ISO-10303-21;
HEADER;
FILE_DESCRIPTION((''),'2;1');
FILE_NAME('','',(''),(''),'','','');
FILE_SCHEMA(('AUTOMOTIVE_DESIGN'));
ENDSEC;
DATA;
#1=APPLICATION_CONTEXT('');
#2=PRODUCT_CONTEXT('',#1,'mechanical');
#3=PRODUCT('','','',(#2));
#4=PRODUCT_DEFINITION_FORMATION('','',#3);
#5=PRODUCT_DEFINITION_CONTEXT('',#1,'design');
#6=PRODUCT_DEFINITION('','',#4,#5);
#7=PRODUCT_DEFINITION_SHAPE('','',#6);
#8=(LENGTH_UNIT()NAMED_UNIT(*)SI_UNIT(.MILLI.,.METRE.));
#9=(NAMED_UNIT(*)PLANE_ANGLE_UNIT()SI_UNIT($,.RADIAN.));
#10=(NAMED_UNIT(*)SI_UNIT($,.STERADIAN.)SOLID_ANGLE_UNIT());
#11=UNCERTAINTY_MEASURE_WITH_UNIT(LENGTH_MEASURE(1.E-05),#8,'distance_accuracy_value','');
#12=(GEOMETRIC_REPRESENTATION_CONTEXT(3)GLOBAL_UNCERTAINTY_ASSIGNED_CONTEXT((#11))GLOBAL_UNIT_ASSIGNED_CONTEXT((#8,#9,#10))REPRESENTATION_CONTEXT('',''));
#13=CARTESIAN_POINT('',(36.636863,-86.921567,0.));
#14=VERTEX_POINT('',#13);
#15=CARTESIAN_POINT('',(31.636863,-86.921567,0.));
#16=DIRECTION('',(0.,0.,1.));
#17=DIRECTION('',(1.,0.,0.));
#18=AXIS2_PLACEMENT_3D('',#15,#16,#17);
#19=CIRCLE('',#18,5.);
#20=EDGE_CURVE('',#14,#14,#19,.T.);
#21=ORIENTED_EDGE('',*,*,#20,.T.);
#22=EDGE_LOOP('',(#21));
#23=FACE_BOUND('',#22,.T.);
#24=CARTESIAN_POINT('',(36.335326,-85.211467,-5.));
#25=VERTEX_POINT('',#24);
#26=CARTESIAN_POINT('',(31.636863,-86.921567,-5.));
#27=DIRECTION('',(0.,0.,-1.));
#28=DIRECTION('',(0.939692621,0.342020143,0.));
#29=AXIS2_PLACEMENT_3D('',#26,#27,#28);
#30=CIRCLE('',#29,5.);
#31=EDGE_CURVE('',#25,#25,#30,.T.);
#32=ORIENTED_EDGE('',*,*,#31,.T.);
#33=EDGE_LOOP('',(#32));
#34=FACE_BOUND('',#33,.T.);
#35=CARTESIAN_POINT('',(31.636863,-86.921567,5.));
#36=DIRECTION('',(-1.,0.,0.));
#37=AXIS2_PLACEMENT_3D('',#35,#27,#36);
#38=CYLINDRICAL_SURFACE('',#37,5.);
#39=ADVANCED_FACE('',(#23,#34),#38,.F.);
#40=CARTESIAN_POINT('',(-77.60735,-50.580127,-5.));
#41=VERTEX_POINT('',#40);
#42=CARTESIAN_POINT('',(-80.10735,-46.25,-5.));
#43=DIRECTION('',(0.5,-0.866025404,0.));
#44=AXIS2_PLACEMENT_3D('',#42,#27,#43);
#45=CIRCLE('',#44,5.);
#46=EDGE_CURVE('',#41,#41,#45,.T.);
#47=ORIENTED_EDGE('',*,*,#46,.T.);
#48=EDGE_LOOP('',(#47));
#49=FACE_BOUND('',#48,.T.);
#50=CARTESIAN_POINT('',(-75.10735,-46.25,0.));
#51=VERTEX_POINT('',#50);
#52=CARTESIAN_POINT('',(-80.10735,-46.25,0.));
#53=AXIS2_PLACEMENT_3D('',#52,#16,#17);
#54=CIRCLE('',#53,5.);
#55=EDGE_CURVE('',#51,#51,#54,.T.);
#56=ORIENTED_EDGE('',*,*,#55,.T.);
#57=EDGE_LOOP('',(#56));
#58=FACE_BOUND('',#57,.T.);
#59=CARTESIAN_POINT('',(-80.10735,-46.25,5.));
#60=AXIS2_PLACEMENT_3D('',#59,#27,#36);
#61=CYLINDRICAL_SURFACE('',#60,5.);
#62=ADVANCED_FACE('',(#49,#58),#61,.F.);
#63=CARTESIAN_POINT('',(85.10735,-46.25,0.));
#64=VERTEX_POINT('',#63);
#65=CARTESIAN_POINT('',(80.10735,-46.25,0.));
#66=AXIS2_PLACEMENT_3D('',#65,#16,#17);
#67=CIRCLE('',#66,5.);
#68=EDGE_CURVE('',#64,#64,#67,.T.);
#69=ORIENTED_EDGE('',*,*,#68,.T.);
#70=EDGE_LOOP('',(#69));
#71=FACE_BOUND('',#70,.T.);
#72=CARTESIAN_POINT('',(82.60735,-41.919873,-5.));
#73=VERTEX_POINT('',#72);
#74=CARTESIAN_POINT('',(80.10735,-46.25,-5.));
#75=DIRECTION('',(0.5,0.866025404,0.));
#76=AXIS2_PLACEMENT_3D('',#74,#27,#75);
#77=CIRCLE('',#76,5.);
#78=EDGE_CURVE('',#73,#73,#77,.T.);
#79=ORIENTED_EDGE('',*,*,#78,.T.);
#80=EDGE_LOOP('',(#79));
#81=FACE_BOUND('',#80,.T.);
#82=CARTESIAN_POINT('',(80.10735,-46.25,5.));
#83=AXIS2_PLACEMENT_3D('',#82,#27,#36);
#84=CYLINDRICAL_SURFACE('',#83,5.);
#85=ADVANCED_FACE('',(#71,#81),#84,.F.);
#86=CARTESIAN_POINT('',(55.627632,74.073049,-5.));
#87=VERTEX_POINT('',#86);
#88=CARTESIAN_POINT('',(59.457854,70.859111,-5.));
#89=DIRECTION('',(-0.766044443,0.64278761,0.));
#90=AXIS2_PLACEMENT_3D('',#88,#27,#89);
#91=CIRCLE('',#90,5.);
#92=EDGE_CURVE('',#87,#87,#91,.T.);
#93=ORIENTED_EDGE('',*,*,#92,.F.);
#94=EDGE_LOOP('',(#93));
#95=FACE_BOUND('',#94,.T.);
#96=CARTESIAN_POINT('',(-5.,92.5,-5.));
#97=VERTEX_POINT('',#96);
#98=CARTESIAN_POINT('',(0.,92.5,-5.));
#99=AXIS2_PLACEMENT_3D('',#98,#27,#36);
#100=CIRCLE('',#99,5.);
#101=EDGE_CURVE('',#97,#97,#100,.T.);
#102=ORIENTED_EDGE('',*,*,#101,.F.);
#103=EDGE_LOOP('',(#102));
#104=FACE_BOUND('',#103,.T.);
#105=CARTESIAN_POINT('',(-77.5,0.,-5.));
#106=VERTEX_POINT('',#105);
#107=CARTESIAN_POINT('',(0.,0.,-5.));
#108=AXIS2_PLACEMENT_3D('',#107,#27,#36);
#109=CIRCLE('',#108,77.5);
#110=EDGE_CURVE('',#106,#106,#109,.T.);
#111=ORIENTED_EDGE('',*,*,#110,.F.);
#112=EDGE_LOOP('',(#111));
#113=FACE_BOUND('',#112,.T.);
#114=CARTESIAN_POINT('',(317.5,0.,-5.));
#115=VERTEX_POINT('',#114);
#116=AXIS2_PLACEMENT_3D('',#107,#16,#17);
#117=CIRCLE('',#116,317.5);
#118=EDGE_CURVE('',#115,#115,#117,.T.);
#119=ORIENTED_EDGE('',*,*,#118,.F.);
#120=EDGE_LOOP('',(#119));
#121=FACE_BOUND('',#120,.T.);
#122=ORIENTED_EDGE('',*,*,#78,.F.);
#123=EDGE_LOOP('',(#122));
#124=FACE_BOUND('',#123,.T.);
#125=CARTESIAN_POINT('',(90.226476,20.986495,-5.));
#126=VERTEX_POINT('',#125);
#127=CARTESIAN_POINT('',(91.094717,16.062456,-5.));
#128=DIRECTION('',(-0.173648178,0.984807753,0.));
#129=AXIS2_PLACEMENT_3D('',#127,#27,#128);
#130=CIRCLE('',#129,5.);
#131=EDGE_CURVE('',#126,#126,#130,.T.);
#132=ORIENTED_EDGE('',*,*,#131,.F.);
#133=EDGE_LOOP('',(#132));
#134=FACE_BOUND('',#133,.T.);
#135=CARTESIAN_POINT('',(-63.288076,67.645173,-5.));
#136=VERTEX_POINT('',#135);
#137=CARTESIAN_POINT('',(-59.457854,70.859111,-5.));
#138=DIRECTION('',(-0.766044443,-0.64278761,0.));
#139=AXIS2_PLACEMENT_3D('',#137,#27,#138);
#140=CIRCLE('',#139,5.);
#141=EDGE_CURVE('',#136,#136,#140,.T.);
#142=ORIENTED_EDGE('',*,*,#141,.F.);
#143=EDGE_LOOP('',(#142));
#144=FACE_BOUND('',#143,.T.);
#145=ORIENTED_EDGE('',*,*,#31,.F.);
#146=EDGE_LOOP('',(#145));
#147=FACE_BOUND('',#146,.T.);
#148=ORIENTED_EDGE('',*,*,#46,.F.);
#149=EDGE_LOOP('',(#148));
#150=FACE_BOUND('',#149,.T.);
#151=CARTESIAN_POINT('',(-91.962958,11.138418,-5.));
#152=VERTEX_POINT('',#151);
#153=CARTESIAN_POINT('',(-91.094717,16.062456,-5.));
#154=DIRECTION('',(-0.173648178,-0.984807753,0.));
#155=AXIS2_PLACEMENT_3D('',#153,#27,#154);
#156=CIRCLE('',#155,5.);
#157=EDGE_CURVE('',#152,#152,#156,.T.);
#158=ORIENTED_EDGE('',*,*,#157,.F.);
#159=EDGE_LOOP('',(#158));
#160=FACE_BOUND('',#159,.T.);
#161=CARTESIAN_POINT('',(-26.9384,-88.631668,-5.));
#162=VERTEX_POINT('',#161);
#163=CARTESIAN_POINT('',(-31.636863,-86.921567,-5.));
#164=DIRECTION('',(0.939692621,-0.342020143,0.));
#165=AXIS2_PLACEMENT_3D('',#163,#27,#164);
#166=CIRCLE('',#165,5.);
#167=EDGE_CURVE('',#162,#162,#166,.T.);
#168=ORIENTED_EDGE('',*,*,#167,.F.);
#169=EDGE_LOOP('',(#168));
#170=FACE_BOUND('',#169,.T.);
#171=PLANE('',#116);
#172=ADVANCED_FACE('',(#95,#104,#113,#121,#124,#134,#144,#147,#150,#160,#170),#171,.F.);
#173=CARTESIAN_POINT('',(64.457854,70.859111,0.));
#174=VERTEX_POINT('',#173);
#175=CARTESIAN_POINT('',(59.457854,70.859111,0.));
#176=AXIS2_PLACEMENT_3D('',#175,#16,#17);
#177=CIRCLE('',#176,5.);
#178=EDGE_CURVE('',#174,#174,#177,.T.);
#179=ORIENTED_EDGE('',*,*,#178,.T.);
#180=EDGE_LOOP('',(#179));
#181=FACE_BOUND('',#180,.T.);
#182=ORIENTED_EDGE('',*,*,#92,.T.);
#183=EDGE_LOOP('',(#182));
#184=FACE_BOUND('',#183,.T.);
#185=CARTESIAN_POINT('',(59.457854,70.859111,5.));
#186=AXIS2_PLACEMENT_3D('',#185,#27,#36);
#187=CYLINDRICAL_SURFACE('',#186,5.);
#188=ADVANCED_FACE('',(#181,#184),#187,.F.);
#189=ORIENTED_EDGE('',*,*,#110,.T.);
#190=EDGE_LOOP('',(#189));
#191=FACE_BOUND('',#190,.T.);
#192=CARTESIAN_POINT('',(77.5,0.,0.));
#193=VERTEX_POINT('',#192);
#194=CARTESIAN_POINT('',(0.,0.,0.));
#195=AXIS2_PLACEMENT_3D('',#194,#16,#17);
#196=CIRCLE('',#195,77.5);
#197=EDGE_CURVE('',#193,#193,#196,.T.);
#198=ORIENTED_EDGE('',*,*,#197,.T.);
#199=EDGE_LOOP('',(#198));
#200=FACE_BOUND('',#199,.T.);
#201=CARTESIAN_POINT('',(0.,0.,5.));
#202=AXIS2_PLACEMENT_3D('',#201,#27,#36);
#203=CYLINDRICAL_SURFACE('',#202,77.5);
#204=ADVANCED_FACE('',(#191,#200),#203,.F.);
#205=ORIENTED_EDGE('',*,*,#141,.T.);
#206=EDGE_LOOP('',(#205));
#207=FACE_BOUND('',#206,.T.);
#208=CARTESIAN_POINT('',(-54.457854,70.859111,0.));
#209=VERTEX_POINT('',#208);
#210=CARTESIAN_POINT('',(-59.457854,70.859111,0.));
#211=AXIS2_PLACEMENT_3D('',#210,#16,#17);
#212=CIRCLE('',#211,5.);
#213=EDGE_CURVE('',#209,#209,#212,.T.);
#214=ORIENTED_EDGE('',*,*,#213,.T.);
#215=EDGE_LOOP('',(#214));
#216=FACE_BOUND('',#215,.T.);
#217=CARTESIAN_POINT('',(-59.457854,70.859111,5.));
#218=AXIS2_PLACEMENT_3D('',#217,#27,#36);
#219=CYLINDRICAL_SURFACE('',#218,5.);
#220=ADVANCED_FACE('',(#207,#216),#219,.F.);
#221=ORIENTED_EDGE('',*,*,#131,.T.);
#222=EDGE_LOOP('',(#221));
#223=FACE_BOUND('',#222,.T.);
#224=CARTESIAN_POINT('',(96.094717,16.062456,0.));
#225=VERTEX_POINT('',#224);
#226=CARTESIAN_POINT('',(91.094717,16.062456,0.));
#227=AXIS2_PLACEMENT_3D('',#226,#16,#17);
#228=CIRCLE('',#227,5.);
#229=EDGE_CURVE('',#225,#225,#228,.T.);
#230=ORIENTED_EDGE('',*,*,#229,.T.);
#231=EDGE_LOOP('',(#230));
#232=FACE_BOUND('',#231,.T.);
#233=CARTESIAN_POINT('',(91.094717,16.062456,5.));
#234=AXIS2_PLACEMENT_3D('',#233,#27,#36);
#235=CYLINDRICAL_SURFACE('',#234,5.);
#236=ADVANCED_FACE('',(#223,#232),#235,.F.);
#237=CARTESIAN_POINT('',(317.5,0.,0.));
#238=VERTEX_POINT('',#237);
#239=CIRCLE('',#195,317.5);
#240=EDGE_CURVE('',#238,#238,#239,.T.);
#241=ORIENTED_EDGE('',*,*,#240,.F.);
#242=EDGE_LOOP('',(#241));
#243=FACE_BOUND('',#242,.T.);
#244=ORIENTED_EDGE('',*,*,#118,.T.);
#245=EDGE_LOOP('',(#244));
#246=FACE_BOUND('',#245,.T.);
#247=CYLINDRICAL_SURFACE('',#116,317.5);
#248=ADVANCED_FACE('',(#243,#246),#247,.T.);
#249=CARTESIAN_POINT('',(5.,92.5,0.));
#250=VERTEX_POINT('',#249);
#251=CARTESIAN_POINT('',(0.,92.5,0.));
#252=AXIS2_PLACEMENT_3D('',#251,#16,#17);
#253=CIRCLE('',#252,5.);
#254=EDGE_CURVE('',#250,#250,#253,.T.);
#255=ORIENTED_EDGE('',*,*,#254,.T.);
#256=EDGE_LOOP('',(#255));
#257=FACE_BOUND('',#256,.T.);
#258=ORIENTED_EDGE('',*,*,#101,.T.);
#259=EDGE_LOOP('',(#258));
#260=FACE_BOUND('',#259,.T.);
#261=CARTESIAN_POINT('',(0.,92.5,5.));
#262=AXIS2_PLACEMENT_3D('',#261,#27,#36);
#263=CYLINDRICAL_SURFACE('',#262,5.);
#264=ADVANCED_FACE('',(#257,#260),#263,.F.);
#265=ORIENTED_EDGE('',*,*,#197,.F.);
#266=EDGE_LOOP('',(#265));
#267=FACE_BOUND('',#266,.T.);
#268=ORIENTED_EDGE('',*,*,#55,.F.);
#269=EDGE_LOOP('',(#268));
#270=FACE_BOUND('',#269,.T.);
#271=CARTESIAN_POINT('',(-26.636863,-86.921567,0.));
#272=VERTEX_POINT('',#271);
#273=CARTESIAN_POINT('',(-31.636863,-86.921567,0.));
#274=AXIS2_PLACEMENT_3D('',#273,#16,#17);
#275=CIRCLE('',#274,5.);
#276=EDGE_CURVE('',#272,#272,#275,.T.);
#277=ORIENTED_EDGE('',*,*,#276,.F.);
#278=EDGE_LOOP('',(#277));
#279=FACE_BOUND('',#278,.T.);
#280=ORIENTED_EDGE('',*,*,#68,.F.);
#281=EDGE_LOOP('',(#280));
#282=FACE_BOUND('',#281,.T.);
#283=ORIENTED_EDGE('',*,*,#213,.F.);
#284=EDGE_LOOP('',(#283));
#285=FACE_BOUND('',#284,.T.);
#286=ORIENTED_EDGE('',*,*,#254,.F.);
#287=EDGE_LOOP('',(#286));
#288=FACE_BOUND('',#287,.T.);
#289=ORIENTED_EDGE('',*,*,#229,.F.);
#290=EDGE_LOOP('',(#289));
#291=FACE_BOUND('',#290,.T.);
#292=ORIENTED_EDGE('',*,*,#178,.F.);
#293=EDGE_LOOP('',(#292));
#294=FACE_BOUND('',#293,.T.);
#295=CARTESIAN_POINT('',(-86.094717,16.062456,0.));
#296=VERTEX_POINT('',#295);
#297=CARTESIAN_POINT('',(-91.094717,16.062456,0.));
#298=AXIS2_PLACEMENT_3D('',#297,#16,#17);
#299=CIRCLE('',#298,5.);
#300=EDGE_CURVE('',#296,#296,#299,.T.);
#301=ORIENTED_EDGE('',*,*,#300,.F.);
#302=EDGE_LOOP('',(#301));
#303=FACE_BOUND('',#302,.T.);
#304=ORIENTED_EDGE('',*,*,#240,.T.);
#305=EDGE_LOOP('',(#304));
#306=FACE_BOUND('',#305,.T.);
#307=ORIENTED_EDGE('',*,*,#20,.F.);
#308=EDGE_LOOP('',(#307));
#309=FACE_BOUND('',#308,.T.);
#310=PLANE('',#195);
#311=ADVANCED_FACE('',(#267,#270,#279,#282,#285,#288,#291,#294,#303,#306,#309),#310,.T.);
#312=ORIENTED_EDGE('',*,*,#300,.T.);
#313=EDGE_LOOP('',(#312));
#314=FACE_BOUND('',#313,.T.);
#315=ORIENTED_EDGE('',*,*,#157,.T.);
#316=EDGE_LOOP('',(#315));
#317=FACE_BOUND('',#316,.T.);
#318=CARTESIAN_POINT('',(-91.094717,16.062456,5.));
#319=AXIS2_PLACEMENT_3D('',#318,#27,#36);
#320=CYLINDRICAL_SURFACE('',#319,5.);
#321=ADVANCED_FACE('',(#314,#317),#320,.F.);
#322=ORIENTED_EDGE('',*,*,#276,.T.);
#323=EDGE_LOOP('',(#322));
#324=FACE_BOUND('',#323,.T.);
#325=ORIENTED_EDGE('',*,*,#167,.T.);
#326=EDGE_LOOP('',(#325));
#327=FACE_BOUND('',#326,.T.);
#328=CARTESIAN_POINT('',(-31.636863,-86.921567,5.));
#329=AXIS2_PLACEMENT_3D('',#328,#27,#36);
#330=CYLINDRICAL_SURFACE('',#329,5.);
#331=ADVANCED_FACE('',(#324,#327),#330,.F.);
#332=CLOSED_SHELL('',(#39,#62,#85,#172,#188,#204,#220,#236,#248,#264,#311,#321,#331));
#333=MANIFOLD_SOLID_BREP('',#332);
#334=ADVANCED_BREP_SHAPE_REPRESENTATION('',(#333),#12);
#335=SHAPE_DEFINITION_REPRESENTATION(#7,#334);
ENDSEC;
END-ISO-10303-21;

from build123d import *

# Parameters (mm, degrees)
SKETCH1_R          = 317.5
BASE_FLANGE1_DEPTH = 5
SKETCH8_R          = 77.5
CUT_EXTRUDE1_DEPTH = 10
SKETCH15_R         = 5
CUT_EXTRUDE2_DEPTH = 10
CIRPATTERN1_COUNT  = 9


# Sheet-metal steps are written as plain solids
with BuildPart() as part:
    # Sketch1 → Base-Flange1 (new body)
    with BuildSketch(Plane.XY):
        Circle(SKETCH1_R)
    extrude(amount=-BASE_FLANGE1_DEPTH)

    # Sketch8 → Cut-Extrude1 (cut)
    with BuildSketch(Plane(origin=(0, 0, -5), x_dir=(-1, 0, 0), z_dir=(0, 0, -1))):
        Circle(SKETCH8_R)
    extrude(amount=-CUT_EXTRUDE1_DEPTH, mode=Mode.SUBTRACT)

    # Sketch15 → Cut-Extrude2 (cut)
    with BuildSketch(Plane(origin=(0, 0, -5), x_dir=(-1, 0, 0), z_dir=(0, 0, -1))):
        with Locations((0, 92.5)):
            Circle(SKETCH15_R)
    cut_extrude2 = extrude(amount=-CUT_EXTRUDE2_DEPTH, mode=Mode.SUBTRACT)

    # CirPattern1: Cut-Extrude2 ×9 about axis
    cirpattern1_axis = Axis((0, 0, 0), (0, 0, 1))
    for i in range(1, CIRPATTERN1_COUNT):
        add(cut_extrude2.rotate(cirpattern1_axis, i * 360 / CIRPATTERN1_COUNT), mode=Mode.SUBTRACT)


solid = part.part
